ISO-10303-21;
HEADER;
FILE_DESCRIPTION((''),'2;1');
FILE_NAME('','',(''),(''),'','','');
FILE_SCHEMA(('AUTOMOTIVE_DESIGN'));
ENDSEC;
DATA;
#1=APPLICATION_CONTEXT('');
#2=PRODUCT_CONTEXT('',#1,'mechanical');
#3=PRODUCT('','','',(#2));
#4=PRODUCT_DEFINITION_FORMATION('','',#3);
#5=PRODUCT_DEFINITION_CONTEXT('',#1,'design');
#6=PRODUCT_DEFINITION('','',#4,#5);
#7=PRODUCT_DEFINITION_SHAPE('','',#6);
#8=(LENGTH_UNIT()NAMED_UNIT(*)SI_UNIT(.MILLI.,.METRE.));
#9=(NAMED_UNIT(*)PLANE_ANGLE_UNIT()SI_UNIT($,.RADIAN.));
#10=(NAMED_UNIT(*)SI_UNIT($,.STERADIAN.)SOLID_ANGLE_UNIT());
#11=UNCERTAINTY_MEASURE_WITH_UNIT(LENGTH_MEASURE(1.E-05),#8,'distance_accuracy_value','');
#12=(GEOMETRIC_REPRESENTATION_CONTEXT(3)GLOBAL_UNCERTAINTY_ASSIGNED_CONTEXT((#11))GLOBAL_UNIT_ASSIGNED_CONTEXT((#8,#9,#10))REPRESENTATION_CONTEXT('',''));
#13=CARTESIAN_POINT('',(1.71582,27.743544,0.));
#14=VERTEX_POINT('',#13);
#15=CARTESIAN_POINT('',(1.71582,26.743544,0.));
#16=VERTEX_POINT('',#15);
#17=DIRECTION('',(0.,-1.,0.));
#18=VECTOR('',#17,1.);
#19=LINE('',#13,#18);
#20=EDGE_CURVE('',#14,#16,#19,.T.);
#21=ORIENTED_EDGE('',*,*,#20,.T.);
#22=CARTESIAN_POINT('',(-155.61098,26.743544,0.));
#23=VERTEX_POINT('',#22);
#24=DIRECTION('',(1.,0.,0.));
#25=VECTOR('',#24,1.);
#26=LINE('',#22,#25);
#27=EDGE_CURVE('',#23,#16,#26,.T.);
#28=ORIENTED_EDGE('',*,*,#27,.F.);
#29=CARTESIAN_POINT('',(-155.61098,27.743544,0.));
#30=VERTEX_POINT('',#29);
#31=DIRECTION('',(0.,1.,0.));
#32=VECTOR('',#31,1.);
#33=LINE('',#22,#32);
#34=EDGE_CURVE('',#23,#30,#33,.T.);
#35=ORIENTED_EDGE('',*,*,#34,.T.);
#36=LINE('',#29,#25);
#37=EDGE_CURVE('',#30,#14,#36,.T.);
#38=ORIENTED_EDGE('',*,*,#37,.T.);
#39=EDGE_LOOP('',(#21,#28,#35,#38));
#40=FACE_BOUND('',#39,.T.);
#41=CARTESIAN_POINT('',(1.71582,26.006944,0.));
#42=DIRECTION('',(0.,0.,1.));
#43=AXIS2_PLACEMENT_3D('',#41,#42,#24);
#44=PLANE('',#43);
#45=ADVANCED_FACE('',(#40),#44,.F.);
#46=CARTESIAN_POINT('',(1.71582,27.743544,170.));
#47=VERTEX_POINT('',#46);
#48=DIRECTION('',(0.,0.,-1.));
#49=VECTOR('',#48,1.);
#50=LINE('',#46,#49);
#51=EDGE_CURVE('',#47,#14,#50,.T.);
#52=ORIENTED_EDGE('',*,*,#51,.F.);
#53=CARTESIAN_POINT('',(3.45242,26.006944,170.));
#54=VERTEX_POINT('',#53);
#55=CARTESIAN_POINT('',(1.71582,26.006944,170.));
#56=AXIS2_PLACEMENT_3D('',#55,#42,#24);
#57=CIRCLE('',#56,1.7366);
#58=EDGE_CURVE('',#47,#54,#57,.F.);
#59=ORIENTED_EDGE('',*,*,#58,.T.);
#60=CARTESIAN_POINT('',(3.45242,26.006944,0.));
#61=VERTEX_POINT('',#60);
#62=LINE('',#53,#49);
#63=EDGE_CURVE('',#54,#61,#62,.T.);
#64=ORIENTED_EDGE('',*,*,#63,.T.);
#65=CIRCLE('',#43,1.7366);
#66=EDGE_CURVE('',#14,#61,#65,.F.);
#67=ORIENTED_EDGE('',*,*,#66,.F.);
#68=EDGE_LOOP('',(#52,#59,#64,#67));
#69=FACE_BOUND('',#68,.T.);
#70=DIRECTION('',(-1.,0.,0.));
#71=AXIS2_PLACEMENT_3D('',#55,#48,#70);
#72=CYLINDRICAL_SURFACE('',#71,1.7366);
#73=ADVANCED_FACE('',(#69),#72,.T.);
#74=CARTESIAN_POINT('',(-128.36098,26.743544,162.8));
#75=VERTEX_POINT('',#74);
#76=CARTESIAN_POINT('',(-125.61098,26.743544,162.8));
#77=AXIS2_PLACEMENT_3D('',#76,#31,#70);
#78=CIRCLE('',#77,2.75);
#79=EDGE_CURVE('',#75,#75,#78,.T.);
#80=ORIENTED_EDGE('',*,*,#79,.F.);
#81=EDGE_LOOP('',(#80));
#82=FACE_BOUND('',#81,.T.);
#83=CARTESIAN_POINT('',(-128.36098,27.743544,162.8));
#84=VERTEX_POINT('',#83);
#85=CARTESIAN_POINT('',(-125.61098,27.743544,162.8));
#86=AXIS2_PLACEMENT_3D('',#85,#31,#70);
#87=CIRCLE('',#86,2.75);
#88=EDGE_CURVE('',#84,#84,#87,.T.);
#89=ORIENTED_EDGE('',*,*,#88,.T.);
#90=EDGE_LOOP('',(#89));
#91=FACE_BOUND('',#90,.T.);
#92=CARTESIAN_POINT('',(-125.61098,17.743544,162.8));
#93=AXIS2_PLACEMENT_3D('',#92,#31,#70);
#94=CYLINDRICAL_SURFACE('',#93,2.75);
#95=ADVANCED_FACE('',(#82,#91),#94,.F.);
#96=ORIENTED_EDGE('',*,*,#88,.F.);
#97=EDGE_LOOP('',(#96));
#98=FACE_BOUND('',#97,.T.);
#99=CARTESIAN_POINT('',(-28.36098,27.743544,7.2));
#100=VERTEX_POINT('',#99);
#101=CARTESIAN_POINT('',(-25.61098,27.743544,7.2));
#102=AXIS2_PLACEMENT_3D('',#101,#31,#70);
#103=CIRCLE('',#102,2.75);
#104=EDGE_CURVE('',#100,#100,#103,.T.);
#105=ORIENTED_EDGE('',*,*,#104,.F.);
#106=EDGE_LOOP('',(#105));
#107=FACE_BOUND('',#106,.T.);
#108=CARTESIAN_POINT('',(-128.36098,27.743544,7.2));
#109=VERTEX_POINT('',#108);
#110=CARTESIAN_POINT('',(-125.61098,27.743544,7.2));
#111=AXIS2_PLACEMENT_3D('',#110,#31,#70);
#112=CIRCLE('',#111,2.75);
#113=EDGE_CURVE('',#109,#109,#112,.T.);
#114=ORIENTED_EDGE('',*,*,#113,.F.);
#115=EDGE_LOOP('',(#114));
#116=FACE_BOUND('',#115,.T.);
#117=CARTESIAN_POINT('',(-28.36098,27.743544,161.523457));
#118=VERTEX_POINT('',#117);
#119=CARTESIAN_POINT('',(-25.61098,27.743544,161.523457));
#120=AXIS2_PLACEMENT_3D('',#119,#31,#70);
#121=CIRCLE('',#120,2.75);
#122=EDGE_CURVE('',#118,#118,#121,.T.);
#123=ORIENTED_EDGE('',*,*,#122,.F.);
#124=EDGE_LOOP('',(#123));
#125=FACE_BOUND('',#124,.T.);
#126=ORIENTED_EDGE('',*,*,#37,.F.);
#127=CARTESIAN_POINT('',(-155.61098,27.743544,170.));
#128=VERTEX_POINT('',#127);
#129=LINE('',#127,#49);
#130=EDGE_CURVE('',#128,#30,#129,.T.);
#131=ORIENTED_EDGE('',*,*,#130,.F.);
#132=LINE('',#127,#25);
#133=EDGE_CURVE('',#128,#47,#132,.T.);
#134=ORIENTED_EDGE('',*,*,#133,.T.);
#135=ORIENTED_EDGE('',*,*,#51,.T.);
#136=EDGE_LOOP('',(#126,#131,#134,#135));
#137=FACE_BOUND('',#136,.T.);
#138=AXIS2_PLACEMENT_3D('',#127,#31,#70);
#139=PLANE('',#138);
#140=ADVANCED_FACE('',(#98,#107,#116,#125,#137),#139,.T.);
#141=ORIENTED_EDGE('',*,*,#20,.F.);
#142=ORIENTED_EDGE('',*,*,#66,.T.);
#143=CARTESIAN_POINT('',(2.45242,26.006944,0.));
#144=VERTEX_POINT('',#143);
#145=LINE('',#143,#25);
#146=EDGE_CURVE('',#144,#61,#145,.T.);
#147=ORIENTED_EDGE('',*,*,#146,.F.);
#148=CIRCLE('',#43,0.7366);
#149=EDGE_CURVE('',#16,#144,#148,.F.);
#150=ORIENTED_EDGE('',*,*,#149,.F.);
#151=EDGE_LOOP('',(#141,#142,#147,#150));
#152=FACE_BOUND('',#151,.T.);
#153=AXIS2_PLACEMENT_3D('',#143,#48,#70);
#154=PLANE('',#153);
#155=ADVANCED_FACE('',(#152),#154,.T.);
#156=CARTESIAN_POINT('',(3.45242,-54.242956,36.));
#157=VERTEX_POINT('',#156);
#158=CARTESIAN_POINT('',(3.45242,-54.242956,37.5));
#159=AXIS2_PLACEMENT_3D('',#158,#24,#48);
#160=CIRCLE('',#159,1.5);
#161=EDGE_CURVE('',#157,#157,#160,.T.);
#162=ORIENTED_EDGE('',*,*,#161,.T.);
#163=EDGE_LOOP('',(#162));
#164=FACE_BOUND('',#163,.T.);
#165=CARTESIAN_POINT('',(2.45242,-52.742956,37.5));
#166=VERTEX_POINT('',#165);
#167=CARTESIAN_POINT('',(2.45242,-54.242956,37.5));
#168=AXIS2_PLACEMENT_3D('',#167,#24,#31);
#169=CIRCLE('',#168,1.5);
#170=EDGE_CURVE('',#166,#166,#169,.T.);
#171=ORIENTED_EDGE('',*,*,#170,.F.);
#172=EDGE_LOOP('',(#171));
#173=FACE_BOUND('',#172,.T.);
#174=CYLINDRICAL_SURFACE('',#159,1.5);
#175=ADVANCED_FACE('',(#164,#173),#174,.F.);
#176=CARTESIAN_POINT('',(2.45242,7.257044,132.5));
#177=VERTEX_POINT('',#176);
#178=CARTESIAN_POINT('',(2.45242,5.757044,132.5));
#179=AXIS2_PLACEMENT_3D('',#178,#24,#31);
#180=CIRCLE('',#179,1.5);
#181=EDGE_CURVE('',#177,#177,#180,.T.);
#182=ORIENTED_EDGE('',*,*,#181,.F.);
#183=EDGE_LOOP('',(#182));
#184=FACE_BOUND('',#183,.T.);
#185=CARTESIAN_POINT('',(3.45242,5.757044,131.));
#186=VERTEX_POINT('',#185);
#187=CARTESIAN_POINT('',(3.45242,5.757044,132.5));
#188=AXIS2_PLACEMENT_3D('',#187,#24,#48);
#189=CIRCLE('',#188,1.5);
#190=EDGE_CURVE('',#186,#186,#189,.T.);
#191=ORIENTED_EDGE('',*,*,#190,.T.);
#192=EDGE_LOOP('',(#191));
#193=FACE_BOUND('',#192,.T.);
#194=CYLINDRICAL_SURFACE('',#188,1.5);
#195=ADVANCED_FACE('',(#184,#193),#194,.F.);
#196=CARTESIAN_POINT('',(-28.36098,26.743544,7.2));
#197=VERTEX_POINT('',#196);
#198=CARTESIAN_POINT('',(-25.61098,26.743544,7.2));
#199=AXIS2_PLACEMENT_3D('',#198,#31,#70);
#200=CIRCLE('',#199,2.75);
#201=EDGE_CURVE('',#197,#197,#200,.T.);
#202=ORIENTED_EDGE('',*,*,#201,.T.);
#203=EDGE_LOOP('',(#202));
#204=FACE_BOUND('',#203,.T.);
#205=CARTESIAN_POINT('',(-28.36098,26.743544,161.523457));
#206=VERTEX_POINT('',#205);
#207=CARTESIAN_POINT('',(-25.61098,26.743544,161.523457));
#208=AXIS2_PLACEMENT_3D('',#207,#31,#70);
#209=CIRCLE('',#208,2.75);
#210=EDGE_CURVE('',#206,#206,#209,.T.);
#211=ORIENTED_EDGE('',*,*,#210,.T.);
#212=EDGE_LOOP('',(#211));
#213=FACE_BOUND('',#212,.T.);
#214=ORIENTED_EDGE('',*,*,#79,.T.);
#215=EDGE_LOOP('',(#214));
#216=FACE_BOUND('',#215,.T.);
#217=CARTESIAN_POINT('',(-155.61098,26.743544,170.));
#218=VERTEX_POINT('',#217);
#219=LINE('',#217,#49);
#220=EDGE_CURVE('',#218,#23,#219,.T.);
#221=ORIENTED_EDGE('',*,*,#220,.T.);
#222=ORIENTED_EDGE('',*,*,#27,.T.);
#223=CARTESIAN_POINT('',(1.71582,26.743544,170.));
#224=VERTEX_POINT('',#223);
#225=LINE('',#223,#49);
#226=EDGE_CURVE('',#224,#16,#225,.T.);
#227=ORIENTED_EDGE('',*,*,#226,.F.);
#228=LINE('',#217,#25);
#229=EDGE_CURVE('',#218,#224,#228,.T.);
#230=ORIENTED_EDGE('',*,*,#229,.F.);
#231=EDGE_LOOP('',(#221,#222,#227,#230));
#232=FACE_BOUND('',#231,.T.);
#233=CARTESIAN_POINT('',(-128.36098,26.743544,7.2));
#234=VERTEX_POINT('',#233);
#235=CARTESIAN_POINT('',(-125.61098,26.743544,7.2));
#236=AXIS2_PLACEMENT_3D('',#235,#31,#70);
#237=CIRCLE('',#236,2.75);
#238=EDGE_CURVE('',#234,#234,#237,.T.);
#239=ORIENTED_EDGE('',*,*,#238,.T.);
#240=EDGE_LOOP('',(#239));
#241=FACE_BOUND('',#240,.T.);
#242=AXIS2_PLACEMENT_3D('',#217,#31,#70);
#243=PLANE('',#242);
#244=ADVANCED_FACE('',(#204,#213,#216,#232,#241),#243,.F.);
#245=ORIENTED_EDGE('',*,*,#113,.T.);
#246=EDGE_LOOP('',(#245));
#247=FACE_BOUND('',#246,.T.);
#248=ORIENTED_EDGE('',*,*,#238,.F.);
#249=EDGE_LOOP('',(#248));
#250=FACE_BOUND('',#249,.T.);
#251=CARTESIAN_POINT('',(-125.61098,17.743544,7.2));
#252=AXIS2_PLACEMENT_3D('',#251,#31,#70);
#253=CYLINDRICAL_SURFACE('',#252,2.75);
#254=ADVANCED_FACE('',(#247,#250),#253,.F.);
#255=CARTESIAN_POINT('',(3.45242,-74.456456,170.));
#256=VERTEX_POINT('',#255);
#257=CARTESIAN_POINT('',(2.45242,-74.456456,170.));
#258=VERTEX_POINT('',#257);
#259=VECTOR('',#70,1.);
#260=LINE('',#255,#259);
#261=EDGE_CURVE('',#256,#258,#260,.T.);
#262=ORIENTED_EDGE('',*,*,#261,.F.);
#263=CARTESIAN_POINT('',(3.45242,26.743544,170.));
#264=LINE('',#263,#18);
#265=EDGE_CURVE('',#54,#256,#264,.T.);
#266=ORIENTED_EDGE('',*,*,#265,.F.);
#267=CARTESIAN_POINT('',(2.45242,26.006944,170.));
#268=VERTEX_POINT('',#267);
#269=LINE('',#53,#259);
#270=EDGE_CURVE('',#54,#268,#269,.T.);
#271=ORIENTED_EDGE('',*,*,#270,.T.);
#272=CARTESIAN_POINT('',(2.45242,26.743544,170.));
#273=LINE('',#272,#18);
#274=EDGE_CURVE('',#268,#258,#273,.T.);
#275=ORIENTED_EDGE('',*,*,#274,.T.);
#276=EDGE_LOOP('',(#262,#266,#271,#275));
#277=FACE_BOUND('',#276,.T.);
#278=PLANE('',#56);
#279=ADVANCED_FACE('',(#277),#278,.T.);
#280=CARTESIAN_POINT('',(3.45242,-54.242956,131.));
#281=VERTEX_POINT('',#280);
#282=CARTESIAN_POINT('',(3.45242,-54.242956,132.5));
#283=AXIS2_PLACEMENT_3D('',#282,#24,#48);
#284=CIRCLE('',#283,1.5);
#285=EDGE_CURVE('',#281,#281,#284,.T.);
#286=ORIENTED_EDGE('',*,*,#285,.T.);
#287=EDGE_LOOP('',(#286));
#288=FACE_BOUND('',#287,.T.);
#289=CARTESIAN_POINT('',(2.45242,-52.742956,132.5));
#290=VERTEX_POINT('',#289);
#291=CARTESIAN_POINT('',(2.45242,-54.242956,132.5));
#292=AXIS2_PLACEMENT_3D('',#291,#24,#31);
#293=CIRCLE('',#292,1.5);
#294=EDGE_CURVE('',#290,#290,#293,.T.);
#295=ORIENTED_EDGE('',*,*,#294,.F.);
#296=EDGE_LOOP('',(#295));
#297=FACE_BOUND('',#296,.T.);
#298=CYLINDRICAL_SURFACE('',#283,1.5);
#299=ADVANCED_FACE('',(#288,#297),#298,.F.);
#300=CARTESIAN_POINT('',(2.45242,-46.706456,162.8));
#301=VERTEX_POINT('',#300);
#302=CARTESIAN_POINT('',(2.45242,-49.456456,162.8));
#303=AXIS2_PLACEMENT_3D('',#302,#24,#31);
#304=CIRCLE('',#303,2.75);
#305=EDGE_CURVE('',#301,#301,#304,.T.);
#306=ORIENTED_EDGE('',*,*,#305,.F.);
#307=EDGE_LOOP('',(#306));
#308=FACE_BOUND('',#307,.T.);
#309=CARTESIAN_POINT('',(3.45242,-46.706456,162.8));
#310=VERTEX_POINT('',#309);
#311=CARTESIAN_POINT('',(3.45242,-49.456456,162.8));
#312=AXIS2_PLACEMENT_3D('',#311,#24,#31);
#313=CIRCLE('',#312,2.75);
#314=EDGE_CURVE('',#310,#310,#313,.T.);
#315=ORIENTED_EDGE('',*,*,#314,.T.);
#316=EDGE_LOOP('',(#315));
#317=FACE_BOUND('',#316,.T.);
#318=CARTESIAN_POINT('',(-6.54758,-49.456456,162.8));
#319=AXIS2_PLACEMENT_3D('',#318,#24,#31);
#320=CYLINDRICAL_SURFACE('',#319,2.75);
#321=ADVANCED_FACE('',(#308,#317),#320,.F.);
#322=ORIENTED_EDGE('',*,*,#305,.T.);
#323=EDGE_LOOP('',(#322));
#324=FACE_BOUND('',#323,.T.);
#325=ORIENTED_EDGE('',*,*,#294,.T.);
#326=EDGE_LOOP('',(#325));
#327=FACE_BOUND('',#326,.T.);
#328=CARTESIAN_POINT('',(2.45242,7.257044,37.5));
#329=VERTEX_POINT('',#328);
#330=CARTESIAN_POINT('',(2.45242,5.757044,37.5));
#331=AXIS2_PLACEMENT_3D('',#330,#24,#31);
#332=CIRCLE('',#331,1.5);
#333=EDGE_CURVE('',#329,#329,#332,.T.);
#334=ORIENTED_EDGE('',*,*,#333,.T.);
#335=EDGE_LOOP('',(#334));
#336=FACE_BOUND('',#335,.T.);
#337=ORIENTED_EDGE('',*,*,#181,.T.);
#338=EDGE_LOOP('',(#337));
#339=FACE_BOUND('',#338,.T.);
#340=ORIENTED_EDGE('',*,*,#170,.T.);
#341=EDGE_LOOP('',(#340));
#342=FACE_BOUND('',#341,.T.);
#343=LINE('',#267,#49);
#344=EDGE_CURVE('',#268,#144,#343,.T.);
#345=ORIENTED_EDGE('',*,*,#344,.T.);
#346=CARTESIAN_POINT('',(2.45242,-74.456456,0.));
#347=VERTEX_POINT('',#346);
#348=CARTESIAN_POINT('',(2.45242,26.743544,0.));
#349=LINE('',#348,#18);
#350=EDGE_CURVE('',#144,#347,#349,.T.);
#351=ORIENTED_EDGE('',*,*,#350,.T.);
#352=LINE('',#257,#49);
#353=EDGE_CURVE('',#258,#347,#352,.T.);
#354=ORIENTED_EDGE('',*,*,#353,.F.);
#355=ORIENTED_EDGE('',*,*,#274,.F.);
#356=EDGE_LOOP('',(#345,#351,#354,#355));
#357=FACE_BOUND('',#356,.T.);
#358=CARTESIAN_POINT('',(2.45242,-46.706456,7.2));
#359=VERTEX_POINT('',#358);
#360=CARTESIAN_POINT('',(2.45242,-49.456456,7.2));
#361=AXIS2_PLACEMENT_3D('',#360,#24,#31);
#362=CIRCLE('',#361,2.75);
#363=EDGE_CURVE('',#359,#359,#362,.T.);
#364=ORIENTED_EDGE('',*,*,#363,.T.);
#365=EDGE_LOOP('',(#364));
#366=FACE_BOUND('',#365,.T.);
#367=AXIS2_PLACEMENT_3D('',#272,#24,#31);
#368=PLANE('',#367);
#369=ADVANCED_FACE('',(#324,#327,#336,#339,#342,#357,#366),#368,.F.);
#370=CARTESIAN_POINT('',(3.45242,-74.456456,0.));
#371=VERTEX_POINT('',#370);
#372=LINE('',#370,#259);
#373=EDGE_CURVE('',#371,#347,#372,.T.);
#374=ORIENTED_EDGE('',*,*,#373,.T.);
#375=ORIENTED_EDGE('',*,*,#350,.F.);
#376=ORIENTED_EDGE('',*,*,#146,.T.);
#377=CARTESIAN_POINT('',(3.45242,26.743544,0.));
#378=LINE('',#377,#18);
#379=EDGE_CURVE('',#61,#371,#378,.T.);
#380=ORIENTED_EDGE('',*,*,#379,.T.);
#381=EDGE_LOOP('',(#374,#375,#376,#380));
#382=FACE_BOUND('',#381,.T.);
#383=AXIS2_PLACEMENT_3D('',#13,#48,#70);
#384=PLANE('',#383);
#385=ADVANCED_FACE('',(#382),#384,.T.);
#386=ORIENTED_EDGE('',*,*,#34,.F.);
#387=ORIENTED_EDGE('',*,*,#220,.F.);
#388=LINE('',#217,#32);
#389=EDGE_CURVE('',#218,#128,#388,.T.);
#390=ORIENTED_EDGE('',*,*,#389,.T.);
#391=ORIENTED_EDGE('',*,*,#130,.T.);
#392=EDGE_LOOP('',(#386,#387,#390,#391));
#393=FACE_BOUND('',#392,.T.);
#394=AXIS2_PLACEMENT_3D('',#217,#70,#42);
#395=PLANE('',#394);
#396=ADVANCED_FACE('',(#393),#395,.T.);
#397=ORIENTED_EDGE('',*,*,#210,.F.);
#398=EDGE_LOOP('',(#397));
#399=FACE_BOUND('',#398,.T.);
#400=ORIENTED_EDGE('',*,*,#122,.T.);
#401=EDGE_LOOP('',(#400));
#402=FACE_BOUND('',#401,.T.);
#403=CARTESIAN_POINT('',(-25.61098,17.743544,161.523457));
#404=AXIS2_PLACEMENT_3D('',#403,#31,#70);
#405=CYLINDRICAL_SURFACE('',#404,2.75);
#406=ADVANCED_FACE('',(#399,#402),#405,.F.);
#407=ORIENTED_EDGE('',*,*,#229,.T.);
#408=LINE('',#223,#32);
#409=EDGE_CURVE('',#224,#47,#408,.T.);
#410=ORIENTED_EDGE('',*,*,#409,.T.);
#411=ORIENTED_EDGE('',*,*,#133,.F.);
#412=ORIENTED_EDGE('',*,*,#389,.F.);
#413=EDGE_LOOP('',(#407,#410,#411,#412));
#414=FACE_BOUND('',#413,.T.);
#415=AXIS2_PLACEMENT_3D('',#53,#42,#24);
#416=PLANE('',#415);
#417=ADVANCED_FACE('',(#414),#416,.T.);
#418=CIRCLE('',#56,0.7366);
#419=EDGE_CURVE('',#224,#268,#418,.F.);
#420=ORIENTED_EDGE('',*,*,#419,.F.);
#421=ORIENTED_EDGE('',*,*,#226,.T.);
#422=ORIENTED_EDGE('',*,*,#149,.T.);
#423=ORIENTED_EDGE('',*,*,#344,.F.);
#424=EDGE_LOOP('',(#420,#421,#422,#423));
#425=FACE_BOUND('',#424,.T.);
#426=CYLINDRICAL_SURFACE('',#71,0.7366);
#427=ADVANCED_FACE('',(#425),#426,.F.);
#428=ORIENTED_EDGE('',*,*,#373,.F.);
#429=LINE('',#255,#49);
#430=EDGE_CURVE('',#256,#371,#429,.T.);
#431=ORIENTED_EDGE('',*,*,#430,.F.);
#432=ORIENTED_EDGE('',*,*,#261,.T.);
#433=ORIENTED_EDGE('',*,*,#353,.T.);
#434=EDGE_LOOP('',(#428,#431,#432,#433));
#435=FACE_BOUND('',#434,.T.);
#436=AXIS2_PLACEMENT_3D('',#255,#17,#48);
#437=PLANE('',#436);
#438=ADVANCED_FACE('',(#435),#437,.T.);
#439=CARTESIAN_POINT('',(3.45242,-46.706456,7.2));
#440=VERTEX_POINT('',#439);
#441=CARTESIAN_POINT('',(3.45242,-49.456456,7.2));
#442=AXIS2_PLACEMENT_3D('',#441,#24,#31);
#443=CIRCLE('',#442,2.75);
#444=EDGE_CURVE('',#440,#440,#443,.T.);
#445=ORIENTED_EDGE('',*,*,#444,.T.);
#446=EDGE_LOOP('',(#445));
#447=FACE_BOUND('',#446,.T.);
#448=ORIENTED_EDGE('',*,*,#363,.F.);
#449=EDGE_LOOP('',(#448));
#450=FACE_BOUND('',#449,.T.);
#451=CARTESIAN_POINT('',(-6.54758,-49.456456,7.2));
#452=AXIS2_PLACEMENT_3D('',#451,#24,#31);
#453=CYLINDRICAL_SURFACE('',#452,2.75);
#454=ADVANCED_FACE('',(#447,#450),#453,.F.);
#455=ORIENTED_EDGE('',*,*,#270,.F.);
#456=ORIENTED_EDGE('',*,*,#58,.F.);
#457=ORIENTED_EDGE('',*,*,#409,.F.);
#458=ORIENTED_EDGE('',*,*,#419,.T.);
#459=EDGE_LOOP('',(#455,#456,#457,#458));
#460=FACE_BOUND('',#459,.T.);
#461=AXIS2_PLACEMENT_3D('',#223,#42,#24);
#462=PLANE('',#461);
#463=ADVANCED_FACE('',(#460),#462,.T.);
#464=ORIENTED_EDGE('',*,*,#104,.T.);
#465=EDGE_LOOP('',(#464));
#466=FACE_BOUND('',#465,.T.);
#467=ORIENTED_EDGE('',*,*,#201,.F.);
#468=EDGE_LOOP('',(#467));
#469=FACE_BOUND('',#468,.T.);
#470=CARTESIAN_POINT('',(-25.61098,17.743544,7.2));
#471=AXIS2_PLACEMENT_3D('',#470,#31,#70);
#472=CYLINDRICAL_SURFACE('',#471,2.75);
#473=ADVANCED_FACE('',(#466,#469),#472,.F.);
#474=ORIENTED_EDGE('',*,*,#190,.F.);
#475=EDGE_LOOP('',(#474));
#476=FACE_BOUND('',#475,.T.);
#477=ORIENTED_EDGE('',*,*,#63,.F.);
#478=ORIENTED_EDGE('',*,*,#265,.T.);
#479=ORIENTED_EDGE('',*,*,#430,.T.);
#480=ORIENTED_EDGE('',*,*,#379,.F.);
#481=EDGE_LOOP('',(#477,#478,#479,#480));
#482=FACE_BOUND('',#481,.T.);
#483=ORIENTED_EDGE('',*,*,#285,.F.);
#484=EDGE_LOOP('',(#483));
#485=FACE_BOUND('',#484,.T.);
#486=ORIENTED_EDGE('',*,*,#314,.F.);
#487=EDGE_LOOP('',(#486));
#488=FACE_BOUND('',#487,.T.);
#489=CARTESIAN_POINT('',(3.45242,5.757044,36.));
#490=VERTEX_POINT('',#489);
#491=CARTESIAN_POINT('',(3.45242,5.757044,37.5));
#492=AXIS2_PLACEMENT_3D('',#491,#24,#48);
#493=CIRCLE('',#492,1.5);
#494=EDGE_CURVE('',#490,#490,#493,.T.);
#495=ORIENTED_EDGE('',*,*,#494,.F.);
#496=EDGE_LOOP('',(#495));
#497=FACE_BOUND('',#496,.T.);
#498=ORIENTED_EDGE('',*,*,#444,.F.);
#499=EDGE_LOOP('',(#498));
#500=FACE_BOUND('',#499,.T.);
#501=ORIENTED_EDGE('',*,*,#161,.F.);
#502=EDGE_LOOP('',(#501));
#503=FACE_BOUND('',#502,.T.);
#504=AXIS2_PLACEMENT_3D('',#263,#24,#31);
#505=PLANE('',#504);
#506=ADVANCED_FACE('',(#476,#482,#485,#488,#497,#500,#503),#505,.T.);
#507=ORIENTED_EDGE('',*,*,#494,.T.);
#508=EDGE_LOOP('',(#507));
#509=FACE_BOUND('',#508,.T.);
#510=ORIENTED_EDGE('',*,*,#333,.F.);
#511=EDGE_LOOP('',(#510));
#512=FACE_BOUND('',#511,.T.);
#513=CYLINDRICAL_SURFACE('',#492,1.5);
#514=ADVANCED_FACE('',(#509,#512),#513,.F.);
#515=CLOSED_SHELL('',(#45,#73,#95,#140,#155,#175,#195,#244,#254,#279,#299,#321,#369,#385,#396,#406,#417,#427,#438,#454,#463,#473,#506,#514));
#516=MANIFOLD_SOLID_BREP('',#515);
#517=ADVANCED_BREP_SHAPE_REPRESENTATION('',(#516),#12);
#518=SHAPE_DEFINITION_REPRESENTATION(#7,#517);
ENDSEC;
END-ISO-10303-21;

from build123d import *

# Parameters (mm, degrees)
SM_BASE_FLANGE_1_DEPTH = 170
SKETCH_6_R             = 2.75
CUT_EXTRUDE_1_DEPTH    = 10
SKETCH_8_R             = 2.75
CUT_EXTRUDE_2_DEPTH    = 10
HOLE_WIZARD_3_0_3_1_D  = 3


# Sheet-metal steps are written as plain solids
with BuildPart() as part:
    # Sketch 1 → 基体-法兰1 (new body)
    with BuildSketch(Plane.XY):
        with BuildLine():
            Line((-155.610979595, 26.743544458), (1.715820405, 26.743544458))
            ThreePointArc((1.715820405, 26.743544458), (2.23667526, 26.527799313), (2.452420405, 26.006944458))
            Line((2.452420405, 26.006944458), (2.452420405, -74.456455542))
            Line((2.452420405, -74.456455542), (3.452420405, -74.456455542))
            Line((3.452420405, -74.456455542), (3.452420405, 26.006944458))
            ThreePointArc((3.452420405, 26.006944458), (2.943782042, 27.234906094), (1.715820405, 27.743544458))
            Line((1.715820405, 27.743544458), (-155.610979595, 27.743544458))
            Line((-155.610979595, 27.743544458), (-155.610979595, 26.743544458))
        make_face()
    extrude(amount=SM_BASE_FLANGE_1_DEPTH)

    # 草图6 → 切除-拉伸1 (cut)
    with BuildSketch(Plane(origin=(0, 27.743544458, 0), x_dir=(-1, 0, 0), z_dir=(0, 1, 0))):
        with Locations((125.610979595, 162.8)):
            Circle(SKETCH_6_R)
        with Locations((25.610979595, 161.523456844)):
            Circle(SKETCH_6_R)
        with Locations((25.610979595, 7.2)):
            Circle(SKETCH_6_R)
        with Locations((125.610979595, 7.2)):
            Circle(SKETCH_6_R)
    extrude(amount=-CUT_EXTRUDE_1_DEPTH, mode=Mode.SUBTRACT)

    # 草图8 → 切除-拉伸2 (cut)
    with BuildSketch(Plane(origin=(3.452420405, 0, 0), x_dir=(0, 0, -1), z_dir=(1, 0, 0))):
        with Locations(Location((-162.8, -49.456455542, 0), (0, 0, 90))):
            Circle(SKETCH_8_R)
        with Locations(Location((-7.2, -49.456455542, 0), (0, 0, 90))):
            Circle(SKETCH_8_R)
    extrude(amount=-CUT_EXTRUDE_2_DEPTH, mode=Mode.SUBTRACT)

    # Ø3.0 (3) 直径孔1 (through all)
    with Locations(Plane(origin=(3.452420405, 0, 0), x_dir=(0, 0, -1), z_dir=(1, 0, 0))):
        with Locations((-132.5, 5.757044458), (-37.5, 5.757044458), (-37.5, -54.242955542), (-132.5, -54.242955542)):
            Hole(HOLE_WIZARD_3_0_3_1_D / 2)


solid = part.part
